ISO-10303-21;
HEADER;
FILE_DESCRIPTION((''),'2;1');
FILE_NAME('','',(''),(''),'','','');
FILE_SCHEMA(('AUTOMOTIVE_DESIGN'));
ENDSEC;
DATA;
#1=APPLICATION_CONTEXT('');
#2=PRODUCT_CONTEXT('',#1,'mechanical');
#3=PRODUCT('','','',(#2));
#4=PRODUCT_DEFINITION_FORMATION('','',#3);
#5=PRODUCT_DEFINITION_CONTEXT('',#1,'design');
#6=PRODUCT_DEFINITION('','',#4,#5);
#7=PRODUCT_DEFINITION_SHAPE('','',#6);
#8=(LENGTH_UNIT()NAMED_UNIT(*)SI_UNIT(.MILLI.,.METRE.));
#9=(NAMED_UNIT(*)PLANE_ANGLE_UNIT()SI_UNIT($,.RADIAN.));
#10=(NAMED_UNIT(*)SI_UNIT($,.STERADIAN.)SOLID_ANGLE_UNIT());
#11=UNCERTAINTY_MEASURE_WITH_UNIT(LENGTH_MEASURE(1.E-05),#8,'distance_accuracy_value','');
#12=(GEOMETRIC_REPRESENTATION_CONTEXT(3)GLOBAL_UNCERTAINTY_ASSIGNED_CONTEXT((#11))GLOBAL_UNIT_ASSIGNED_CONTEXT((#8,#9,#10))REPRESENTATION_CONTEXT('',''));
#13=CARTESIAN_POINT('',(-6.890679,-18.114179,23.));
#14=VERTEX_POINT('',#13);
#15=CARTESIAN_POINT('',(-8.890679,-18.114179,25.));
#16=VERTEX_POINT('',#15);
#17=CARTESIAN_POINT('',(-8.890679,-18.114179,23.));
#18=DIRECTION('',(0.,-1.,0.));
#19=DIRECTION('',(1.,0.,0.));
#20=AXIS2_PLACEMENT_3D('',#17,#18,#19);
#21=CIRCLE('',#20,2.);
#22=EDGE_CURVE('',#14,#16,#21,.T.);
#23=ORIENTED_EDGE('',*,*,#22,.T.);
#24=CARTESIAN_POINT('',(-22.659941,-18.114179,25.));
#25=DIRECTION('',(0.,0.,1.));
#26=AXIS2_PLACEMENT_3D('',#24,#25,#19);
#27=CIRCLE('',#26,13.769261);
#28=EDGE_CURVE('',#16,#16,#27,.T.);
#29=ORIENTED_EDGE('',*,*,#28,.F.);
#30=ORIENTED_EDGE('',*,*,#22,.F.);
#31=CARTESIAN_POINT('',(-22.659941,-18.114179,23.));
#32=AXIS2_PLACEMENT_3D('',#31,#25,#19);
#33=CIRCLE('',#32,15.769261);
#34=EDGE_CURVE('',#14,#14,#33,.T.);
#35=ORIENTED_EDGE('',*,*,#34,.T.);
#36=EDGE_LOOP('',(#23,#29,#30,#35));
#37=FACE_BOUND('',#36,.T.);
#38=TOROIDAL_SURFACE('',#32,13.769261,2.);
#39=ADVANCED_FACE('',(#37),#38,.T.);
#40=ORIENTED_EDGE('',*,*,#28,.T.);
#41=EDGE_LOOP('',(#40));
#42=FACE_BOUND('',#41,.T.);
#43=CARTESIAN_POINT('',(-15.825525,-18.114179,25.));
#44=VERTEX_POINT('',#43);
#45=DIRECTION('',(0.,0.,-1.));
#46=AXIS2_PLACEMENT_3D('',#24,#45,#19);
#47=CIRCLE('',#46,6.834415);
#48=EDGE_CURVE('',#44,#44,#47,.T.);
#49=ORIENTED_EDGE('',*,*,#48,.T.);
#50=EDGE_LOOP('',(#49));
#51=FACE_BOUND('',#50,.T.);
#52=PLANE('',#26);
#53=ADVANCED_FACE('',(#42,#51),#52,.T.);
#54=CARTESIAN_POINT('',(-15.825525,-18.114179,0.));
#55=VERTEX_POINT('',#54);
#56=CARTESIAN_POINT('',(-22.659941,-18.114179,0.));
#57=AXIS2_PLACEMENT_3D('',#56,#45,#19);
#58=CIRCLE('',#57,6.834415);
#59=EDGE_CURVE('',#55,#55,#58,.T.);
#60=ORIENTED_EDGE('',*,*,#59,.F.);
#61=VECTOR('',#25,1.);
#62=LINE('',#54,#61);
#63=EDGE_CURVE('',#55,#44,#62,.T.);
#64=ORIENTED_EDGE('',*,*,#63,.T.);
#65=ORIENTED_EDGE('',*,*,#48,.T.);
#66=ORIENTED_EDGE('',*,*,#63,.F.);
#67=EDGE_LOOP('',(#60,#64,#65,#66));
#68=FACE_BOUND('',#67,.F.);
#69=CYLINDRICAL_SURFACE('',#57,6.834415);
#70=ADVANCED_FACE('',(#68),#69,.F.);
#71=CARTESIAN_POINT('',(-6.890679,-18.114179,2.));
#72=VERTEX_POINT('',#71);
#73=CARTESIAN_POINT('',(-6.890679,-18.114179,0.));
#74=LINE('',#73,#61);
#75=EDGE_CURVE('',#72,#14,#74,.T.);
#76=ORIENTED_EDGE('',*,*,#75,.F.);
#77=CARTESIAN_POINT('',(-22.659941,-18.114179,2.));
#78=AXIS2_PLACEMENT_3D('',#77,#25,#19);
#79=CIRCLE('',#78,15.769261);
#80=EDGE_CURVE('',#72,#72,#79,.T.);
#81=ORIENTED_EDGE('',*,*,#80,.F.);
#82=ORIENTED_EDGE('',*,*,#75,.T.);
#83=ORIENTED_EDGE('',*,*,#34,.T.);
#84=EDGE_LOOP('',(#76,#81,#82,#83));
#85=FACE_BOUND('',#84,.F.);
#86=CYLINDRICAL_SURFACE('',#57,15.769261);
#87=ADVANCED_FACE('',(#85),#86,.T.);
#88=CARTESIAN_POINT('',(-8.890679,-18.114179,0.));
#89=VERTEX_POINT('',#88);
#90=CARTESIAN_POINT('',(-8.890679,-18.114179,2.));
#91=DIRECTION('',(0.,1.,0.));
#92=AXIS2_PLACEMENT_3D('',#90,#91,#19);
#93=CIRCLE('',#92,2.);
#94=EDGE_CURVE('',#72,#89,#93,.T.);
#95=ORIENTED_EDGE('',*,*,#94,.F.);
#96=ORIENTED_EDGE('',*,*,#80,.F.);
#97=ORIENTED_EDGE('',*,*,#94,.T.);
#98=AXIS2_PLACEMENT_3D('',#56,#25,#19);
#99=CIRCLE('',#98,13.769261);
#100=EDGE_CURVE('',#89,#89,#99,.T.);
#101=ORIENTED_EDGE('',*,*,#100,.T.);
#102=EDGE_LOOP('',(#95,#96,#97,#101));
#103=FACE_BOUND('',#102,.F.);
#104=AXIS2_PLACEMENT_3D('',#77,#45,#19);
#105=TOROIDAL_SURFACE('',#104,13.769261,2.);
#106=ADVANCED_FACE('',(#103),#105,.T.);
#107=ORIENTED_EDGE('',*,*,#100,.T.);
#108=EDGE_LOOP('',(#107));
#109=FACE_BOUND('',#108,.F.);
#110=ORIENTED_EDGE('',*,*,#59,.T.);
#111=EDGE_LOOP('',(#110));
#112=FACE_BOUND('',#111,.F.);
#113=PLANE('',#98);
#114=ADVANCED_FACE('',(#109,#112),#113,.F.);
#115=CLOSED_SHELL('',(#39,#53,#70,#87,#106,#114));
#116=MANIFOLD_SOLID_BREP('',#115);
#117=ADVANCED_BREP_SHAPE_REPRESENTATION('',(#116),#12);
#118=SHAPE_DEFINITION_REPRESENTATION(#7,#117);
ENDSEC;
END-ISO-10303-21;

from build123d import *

# Parameters (mm, degrees)
F0_R     = 15.7692613996
F1_DEPTH = 25
F2_R     = 2
F3_R     = 6.8344152612
F4_DEPTH = 40


# Not quite as in the source:
# - a feature names something its author has since deleted; it is built from what else it names


with BuildPart() as f1:
    # F0 (on Top) → F1 (new body)
    with BuildSketch(Plane.XY):
        with Locations((-22.6599406451, -18.1141793728)):
            Circle(F0_R)
    extrude(amount=F1_DEPTH)

    # F2
    f2_edges = [f1.edges().sort_by_distance(p)[0] for p in [
        (-38.429202, -18.114179, 0),
        (-38.429202, -18.114179, 25),
    ]]
    fillet(f2_edges, radius=F2_R)

    # F3 (on face) → F4 (cut)
    with BuildSketch(Plane(origin=(0, 0, 0), x_dir=(1, 0, 0), z_dir=(0, 0, -1))):
        with Locations((-22.6599406451, 18.1141793728)):
            Circle(F3_R)
    extrude(amount=-F4_DEPTH, mode=Mode.SUBTRACT)


solid = f1.part
